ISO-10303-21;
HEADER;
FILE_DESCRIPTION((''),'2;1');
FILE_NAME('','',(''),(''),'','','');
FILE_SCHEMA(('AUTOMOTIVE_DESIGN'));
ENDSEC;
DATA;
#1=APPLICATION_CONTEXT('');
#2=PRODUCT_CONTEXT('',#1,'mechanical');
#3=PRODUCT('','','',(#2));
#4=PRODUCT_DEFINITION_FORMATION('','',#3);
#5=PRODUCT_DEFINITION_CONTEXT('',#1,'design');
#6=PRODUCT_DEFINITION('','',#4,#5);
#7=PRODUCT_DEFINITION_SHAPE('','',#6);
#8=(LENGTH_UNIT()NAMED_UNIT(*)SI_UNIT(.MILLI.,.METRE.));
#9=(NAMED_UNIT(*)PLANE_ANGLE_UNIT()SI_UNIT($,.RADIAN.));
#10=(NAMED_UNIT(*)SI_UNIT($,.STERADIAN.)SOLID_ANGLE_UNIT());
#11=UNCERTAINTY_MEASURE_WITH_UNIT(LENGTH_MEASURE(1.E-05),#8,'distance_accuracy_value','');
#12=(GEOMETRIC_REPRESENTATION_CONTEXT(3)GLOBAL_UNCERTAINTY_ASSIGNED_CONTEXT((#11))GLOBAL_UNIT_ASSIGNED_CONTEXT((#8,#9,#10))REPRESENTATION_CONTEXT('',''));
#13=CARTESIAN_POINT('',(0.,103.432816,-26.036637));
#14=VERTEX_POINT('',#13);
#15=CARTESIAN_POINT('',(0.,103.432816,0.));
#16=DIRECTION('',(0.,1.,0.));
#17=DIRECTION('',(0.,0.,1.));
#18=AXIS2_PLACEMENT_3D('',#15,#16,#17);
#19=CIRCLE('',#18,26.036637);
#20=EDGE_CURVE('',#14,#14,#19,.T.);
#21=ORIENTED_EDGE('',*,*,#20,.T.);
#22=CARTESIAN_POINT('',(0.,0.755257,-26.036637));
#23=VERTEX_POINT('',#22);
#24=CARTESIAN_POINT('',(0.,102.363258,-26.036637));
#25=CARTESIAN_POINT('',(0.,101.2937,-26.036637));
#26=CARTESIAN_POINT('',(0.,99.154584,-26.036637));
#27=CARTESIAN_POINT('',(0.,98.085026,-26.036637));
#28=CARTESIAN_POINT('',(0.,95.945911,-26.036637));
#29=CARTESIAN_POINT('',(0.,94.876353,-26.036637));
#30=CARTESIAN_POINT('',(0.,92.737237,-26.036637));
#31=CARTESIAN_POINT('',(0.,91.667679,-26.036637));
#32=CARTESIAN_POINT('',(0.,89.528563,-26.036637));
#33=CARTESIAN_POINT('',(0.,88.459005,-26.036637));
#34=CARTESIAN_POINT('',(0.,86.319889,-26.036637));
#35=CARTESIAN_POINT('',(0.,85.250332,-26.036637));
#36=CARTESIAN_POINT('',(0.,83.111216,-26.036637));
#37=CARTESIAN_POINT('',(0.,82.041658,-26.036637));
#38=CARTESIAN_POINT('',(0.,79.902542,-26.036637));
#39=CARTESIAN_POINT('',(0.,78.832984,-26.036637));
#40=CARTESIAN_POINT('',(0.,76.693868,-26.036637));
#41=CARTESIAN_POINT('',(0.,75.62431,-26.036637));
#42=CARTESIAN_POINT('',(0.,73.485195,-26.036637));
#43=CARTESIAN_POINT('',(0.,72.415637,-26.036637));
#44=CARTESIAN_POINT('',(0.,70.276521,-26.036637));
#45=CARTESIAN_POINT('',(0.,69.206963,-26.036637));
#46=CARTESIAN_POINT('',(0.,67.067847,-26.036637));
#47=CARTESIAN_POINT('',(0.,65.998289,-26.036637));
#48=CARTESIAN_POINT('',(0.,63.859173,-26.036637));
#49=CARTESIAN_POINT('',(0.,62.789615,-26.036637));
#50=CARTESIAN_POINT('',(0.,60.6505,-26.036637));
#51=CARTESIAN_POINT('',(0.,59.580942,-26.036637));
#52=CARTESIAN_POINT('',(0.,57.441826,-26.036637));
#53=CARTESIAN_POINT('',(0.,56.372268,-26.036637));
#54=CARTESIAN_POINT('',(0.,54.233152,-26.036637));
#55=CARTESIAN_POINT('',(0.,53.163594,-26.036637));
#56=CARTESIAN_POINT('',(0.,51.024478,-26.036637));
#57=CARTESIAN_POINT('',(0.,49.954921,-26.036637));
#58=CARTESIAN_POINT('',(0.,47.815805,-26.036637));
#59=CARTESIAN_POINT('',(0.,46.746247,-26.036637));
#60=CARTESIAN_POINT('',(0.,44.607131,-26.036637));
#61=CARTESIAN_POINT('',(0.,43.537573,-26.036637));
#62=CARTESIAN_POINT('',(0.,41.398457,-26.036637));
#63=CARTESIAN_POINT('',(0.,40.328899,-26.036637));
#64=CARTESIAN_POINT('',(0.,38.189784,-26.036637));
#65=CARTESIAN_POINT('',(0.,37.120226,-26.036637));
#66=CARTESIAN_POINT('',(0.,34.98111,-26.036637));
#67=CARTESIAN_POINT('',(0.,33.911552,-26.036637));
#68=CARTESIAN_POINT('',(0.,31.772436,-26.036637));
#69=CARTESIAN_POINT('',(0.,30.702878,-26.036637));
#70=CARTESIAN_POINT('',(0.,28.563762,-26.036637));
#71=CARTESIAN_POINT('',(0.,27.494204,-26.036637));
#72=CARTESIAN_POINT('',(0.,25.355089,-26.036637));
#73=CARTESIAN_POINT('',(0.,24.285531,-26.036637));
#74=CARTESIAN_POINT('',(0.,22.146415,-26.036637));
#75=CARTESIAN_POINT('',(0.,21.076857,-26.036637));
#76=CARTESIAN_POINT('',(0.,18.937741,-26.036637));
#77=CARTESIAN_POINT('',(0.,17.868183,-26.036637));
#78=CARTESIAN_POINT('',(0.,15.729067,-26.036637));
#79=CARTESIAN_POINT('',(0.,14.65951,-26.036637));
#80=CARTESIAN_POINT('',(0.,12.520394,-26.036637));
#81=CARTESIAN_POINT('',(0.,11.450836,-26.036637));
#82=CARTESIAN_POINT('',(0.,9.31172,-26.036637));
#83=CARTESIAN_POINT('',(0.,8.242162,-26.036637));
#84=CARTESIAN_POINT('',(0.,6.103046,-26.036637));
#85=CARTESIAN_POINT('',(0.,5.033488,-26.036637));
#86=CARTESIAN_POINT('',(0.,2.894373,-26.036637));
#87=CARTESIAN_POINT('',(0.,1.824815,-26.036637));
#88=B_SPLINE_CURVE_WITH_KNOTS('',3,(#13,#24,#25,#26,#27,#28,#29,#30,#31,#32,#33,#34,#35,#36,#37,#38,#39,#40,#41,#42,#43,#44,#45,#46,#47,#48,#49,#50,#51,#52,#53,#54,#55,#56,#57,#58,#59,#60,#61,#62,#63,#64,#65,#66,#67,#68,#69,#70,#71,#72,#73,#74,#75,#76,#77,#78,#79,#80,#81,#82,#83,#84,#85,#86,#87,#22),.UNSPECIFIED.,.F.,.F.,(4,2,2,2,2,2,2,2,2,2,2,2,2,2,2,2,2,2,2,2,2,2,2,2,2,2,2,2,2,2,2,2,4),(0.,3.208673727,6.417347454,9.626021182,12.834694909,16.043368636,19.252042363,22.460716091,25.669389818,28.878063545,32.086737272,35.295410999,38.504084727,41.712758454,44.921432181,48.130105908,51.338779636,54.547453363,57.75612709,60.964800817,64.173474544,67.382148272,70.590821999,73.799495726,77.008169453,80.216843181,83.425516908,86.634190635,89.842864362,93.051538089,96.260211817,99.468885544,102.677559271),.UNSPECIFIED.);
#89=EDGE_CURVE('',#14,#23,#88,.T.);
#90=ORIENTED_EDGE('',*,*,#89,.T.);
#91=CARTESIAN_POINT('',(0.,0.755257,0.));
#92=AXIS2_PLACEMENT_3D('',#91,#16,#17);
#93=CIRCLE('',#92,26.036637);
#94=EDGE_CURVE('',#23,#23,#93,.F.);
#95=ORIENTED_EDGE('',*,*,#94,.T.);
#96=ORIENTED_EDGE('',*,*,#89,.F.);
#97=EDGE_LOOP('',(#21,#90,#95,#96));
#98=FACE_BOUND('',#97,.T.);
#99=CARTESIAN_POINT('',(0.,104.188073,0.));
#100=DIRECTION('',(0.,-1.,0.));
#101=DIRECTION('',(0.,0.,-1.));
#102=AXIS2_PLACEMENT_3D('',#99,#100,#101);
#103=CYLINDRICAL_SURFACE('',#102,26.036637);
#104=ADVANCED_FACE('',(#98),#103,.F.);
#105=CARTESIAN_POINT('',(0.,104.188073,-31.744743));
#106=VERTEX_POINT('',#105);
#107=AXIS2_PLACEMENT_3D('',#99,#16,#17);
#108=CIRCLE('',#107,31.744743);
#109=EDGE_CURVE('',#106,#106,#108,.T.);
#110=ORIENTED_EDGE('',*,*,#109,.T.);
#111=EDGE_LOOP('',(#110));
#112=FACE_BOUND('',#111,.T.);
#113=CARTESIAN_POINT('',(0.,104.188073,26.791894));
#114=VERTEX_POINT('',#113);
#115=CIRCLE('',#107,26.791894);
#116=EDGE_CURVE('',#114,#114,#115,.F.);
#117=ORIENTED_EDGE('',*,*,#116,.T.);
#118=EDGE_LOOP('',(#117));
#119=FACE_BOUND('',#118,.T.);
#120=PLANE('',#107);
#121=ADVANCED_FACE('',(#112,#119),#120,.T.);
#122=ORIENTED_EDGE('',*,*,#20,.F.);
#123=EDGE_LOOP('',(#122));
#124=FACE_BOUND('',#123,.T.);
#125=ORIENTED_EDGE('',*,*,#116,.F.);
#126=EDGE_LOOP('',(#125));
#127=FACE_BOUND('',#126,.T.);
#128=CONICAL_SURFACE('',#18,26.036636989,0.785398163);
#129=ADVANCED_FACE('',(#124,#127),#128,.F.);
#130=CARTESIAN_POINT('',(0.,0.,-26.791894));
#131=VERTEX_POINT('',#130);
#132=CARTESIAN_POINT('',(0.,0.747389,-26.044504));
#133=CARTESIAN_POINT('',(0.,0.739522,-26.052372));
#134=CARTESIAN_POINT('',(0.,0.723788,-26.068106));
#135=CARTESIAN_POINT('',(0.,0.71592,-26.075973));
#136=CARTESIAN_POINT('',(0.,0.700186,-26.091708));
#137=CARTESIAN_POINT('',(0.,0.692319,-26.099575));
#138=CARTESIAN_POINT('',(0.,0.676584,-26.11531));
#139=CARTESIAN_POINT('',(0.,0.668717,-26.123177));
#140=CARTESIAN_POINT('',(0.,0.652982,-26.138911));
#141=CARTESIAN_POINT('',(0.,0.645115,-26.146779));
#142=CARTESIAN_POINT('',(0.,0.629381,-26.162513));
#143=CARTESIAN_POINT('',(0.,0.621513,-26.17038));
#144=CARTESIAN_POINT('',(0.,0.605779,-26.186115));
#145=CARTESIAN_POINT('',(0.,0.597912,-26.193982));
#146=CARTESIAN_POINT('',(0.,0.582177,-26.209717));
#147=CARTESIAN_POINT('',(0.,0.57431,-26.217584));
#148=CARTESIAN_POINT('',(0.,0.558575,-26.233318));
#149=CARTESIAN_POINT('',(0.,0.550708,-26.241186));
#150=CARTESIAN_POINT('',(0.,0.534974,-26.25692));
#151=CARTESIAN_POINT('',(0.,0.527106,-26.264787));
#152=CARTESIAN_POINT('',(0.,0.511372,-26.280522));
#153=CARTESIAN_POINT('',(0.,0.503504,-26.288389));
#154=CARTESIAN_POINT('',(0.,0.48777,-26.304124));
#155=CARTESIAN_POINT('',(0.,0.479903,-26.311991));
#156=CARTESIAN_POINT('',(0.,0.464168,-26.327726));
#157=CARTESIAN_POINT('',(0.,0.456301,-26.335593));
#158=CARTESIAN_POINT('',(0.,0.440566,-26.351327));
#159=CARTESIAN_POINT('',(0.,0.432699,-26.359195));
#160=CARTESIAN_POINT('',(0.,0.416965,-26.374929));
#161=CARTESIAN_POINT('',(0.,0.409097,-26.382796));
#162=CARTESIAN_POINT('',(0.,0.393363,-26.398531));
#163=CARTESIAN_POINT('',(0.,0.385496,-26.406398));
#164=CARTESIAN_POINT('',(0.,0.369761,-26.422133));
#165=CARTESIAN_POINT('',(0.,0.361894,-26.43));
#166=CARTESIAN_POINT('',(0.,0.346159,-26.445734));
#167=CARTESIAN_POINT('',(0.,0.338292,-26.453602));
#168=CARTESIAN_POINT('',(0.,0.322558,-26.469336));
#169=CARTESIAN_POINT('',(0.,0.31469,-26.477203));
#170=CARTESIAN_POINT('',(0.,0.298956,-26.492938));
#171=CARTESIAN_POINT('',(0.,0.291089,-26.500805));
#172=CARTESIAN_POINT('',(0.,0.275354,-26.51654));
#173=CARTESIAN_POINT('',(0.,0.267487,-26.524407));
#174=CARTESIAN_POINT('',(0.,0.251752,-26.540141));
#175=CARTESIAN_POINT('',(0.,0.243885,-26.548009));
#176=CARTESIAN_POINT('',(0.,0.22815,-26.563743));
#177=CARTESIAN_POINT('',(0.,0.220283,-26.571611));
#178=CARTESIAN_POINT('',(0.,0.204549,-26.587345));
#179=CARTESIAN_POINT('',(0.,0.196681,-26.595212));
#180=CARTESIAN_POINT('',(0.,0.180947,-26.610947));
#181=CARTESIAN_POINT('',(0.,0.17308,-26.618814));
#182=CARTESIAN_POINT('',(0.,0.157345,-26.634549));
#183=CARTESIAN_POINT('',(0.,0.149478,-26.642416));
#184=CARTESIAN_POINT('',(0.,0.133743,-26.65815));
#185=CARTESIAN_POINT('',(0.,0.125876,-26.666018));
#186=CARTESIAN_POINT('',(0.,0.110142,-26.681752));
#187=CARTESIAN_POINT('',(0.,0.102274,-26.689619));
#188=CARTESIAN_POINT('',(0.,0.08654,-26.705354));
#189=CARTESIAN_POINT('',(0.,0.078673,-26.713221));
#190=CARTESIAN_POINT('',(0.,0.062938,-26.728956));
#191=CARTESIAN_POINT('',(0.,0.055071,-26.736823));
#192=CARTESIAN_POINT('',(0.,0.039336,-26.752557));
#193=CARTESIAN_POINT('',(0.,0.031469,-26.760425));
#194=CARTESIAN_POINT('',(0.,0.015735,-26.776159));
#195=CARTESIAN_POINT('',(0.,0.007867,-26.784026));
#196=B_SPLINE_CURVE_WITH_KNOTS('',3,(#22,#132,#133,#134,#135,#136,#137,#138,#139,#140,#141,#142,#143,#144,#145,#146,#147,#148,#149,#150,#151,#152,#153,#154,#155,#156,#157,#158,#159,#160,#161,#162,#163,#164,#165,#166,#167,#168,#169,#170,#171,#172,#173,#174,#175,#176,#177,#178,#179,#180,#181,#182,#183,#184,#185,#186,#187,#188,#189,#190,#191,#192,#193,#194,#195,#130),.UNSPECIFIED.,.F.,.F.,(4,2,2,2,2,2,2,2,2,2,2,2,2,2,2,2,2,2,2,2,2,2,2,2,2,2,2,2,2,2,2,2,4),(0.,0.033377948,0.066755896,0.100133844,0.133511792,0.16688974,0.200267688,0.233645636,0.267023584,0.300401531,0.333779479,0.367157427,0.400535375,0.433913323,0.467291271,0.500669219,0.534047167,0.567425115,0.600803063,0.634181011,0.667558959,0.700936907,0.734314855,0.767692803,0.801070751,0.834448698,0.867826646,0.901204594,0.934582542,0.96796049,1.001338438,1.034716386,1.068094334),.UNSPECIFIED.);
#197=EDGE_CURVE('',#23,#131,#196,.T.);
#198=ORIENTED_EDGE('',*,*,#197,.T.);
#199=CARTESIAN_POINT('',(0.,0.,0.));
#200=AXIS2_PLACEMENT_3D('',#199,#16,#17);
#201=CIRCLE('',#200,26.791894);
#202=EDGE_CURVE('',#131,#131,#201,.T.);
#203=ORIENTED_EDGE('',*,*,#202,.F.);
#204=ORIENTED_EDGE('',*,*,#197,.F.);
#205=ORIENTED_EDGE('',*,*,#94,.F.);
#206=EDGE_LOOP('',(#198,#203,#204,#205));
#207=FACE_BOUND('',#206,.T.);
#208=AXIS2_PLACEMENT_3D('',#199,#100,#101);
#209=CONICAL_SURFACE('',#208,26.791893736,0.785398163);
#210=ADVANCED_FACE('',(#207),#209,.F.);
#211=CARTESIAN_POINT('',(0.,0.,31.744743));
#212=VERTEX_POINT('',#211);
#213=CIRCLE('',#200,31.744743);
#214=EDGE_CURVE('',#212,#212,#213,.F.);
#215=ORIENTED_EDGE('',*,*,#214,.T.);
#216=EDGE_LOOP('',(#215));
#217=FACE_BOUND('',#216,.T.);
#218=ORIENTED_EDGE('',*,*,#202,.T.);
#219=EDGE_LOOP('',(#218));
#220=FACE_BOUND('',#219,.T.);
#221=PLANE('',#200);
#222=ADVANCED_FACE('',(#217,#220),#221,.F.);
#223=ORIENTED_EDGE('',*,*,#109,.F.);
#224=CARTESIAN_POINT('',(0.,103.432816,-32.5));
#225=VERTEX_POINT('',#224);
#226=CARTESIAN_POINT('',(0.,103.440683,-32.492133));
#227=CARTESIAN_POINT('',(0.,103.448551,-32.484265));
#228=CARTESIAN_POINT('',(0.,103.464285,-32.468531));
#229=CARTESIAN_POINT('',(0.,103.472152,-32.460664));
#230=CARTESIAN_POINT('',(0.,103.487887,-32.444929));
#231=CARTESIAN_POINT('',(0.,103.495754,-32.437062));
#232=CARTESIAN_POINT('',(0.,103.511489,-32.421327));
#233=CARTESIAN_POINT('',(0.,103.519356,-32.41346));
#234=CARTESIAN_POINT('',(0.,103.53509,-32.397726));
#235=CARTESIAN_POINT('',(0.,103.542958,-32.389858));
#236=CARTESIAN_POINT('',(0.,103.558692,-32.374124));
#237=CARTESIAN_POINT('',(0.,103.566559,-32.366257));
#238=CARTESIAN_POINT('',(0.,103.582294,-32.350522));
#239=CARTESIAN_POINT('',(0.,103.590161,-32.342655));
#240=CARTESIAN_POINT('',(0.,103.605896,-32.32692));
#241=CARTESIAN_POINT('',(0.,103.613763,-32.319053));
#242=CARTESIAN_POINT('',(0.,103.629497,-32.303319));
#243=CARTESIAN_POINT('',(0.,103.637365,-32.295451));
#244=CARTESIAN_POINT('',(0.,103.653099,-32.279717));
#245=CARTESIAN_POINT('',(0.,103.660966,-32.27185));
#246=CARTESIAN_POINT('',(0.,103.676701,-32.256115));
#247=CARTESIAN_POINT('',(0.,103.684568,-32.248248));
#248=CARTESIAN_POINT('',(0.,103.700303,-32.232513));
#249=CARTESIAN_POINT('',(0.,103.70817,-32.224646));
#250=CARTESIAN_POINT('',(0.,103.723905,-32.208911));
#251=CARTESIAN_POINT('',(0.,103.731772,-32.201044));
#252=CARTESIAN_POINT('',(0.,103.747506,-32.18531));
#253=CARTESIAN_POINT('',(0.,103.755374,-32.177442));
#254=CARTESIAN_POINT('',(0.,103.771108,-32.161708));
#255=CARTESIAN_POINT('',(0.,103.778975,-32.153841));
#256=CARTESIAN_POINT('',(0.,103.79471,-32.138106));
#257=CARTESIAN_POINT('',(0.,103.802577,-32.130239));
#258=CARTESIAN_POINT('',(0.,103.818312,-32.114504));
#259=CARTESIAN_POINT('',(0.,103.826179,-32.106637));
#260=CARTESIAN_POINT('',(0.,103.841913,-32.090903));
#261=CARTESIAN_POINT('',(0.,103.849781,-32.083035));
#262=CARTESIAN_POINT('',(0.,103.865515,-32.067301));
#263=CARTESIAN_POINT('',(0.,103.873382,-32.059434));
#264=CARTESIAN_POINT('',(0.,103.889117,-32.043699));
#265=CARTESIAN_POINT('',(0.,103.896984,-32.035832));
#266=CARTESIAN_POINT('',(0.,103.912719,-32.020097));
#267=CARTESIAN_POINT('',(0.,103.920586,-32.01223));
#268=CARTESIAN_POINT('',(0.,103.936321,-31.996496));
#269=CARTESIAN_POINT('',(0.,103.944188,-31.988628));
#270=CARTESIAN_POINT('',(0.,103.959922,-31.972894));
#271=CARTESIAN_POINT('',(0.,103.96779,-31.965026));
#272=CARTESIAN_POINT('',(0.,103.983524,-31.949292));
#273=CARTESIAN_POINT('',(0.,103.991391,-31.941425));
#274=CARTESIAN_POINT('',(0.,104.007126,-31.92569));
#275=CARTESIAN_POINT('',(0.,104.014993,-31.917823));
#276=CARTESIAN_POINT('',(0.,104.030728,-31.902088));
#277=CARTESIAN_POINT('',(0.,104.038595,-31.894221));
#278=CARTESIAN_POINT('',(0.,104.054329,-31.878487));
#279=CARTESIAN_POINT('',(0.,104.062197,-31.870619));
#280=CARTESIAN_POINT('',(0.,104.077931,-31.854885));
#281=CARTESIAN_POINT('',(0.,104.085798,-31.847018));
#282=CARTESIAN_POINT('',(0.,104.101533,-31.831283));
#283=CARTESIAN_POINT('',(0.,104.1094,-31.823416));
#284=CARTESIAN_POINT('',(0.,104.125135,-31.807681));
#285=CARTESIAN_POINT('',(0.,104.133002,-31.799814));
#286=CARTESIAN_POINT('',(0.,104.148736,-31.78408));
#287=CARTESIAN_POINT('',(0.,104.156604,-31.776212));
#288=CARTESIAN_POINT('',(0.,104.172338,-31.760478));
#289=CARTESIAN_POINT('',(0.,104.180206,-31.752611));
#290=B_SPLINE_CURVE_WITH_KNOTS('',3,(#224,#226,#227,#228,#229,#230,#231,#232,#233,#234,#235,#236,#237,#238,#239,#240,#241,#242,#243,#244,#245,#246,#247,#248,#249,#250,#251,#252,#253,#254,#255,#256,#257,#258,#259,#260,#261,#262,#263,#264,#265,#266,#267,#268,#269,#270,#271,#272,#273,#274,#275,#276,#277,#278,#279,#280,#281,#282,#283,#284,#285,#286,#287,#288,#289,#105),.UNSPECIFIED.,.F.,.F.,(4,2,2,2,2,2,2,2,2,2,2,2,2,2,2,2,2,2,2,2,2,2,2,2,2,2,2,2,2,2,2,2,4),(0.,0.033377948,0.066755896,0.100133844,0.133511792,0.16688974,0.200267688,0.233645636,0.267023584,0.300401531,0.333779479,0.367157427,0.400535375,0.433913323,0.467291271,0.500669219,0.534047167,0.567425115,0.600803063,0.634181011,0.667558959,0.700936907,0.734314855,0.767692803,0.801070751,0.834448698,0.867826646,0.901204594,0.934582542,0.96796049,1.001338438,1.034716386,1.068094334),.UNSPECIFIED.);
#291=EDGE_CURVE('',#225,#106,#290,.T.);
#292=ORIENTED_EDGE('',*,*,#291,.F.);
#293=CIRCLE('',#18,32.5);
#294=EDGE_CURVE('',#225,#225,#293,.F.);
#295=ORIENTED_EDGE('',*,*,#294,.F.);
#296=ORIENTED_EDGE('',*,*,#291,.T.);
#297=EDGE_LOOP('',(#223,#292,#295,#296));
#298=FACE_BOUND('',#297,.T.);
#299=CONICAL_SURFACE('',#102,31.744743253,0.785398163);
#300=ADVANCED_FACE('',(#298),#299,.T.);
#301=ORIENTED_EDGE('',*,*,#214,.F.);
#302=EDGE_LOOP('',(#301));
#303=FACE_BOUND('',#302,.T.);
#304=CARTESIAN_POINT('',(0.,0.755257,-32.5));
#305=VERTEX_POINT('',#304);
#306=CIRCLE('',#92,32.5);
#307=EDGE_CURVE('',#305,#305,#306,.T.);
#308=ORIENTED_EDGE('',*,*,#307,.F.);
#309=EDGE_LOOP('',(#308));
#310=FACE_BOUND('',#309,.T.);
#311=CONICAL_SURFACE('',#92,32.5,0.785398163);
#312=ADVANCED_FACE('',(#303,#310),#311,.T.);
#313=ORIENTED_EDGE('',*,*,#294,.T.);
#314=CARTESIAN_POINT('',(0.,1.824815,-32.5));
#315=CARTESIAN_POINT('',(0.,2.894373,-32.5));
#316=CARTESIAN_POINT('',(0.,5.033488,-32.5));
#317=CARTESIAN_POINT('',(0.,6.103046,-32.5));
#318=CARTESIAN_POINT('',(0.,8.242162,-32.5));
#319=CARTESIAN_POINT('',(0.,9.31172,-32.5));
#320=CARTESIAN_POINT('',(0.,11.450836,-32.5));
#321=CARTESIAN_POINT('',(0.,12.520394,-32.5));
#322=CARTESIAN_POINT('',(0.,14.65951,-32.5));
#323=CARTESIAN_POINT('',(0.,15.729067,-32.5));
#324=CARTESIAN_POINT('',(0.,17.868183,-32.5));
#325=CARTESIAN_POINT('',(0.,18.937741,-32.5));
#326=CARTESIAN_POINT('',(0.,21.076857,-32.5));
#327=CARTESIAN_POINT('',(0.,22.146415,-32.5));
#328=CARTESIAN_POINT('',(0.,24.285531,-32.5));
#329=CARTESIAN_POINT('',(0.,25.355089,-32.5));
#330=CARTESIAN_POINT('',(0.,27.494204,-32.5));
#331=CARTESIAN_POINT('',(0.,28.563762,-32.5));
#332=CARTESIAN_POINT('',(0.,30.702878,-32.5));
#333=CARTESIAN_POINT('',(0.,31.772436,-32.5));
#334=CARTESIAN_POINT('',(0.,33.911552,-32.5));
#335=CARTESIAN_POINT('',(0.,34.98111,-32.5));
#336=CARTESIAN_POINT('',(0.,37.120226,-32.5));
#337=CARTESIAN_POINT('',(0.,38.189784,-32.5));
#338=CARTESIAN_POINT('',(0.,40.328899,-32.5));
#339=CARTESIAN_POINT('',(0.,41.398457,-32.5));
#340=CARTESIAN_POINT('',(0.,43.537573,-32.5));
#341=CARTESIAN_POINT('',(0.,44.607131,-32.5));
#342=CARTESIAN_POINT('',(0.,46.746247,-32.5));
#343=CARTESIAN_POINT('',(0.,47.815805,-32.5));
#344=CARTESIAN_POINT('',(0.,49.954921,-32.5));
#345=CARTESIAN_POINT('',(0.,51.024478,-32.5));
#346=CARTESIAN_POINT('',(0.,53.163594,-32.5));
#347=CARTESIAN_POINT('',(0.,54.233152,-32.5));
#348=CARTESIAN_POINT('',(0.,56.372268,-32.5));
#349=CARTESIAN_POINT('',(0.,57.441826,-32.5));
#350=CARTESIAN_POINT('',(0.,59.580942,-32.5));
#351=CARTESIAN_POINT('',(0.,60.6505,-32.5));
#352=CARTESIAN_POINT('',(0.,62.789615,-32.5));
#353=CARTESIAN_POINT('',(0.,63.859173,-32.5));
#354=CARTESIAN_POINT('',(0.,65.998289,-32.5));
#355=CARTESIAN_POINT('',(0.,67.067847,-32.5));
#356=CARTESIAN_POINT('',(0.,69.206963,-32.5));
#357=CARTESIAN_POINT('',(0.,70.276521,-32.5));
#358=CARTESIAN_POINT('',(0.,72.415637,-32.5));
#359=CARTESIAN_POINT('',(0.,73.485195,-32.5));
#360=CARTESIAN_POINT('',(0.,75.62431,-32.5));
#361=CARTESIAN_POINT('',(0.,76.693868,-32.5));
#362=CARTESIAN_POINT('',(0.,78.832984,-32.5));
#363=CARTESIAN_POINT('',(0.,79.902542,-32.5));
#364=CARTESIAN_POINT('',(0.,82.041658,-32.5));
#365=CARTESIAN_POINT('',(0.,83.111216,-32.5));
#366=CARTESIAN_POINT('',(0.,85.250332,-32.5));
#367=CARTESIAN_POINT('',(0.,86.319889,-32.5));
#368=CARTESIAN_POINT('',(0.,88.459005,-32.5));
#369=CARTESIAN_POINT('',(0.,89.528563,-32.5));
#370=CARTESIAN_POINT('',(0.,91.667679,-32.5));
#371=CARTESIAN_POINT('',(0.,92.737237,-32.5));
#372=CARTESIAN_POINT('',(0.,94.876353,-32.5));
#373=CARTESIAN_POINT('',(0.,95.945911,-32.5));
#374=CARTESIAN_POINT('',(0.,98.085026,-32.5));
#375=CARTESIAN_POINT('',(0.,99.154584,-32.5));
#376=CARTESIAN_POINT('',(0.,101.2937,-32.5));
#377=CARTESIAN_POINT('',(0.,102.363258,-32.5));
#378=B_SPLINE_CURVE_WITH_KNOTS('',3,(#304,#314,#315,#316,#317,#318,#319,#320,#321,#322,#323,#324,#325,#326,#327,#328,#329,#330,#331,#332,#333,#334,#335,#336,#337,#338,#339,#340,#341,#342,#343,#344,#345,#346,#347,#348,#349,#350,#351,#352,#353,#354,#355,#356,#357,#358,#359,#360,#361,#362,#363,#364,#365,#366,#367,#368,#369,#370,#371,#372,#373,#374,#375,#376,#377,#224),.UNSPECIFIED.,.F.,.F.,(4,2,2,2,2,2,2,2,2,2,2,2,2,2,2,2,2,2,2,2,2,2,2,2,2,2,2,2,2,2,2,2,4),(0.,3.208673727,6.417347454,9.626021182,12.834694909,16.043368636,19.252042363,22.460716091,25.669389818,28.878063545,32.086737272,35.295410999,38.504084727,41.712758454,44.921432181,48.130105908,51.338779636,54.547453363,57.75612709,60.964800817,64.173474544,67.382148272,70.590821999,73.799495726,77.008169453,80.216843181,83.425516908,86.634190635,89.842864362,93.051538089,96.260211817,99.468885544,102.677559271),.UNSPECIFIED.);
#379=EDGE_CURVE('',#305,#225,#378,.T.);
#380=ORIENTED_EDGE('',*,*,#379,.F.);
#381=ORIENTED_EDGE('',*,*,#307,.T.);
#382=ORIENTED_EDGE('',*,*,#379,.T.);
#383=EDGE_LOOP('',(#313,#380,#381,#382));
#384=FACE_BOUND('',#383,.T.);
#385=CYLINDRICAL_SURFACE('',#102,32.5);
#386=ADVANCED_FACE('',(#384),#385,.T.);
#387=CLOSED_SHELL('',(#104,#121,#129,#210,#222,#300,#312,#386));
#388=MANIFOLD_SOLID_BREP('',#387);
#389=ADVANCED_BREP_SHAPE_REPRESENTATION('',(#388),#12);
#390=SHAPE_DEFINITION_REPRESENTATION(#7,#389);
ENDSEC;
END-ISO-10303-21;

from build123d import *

# Parameters (mm, degrees)
SKETCH1_R           = 32.5
BOSS_EXTRUDE1_DEPTH = 104.188072764
SKETCH2_R           = 26.036636989
CUT_EXTRUDE1_DEPTH  = 114.875609796
CHAMFER1_SIZE       = 0.755256747


with BuildPart() as part:
    # Sketch1 → Boss-Extrude1 (new body)
    with BuildSketch(Plane(origin=(0, 0, 0), x_dir=(1, 0, 0), z_dir=(0, 1, 0))):
        Circle(SKETCH1_R)
    extrude(amount=BOSS_EXTRUDE1_DEPTH)

    # Sketch2 → Cut-Extrude1 (cut, through all)
    with BuildSketch(Plane(origin=(0, 0, 0), x_dir=(1, 0, 0), z_dir=(0, 1, 0))):
        Circle(SKETCH2_R)
    extrude(amount=CUT_EXTRUDE1_DEPTH, mode=Mode.SUBTRACT)

    # Chamfer1
    chamfer1_edges = [part.edges().sort_by_distance(p)[0] for p in [
        (-26.036636989, 104.188072764, 0),
        (-26.036636989, 0, 0),
        (-32.5, 0, 0),
        (-32.5, 104.188072764, 0),
    ]]
    chamfer(chamfer1_edges, length=CHAMFER1_SIZE)


solid = part.part
